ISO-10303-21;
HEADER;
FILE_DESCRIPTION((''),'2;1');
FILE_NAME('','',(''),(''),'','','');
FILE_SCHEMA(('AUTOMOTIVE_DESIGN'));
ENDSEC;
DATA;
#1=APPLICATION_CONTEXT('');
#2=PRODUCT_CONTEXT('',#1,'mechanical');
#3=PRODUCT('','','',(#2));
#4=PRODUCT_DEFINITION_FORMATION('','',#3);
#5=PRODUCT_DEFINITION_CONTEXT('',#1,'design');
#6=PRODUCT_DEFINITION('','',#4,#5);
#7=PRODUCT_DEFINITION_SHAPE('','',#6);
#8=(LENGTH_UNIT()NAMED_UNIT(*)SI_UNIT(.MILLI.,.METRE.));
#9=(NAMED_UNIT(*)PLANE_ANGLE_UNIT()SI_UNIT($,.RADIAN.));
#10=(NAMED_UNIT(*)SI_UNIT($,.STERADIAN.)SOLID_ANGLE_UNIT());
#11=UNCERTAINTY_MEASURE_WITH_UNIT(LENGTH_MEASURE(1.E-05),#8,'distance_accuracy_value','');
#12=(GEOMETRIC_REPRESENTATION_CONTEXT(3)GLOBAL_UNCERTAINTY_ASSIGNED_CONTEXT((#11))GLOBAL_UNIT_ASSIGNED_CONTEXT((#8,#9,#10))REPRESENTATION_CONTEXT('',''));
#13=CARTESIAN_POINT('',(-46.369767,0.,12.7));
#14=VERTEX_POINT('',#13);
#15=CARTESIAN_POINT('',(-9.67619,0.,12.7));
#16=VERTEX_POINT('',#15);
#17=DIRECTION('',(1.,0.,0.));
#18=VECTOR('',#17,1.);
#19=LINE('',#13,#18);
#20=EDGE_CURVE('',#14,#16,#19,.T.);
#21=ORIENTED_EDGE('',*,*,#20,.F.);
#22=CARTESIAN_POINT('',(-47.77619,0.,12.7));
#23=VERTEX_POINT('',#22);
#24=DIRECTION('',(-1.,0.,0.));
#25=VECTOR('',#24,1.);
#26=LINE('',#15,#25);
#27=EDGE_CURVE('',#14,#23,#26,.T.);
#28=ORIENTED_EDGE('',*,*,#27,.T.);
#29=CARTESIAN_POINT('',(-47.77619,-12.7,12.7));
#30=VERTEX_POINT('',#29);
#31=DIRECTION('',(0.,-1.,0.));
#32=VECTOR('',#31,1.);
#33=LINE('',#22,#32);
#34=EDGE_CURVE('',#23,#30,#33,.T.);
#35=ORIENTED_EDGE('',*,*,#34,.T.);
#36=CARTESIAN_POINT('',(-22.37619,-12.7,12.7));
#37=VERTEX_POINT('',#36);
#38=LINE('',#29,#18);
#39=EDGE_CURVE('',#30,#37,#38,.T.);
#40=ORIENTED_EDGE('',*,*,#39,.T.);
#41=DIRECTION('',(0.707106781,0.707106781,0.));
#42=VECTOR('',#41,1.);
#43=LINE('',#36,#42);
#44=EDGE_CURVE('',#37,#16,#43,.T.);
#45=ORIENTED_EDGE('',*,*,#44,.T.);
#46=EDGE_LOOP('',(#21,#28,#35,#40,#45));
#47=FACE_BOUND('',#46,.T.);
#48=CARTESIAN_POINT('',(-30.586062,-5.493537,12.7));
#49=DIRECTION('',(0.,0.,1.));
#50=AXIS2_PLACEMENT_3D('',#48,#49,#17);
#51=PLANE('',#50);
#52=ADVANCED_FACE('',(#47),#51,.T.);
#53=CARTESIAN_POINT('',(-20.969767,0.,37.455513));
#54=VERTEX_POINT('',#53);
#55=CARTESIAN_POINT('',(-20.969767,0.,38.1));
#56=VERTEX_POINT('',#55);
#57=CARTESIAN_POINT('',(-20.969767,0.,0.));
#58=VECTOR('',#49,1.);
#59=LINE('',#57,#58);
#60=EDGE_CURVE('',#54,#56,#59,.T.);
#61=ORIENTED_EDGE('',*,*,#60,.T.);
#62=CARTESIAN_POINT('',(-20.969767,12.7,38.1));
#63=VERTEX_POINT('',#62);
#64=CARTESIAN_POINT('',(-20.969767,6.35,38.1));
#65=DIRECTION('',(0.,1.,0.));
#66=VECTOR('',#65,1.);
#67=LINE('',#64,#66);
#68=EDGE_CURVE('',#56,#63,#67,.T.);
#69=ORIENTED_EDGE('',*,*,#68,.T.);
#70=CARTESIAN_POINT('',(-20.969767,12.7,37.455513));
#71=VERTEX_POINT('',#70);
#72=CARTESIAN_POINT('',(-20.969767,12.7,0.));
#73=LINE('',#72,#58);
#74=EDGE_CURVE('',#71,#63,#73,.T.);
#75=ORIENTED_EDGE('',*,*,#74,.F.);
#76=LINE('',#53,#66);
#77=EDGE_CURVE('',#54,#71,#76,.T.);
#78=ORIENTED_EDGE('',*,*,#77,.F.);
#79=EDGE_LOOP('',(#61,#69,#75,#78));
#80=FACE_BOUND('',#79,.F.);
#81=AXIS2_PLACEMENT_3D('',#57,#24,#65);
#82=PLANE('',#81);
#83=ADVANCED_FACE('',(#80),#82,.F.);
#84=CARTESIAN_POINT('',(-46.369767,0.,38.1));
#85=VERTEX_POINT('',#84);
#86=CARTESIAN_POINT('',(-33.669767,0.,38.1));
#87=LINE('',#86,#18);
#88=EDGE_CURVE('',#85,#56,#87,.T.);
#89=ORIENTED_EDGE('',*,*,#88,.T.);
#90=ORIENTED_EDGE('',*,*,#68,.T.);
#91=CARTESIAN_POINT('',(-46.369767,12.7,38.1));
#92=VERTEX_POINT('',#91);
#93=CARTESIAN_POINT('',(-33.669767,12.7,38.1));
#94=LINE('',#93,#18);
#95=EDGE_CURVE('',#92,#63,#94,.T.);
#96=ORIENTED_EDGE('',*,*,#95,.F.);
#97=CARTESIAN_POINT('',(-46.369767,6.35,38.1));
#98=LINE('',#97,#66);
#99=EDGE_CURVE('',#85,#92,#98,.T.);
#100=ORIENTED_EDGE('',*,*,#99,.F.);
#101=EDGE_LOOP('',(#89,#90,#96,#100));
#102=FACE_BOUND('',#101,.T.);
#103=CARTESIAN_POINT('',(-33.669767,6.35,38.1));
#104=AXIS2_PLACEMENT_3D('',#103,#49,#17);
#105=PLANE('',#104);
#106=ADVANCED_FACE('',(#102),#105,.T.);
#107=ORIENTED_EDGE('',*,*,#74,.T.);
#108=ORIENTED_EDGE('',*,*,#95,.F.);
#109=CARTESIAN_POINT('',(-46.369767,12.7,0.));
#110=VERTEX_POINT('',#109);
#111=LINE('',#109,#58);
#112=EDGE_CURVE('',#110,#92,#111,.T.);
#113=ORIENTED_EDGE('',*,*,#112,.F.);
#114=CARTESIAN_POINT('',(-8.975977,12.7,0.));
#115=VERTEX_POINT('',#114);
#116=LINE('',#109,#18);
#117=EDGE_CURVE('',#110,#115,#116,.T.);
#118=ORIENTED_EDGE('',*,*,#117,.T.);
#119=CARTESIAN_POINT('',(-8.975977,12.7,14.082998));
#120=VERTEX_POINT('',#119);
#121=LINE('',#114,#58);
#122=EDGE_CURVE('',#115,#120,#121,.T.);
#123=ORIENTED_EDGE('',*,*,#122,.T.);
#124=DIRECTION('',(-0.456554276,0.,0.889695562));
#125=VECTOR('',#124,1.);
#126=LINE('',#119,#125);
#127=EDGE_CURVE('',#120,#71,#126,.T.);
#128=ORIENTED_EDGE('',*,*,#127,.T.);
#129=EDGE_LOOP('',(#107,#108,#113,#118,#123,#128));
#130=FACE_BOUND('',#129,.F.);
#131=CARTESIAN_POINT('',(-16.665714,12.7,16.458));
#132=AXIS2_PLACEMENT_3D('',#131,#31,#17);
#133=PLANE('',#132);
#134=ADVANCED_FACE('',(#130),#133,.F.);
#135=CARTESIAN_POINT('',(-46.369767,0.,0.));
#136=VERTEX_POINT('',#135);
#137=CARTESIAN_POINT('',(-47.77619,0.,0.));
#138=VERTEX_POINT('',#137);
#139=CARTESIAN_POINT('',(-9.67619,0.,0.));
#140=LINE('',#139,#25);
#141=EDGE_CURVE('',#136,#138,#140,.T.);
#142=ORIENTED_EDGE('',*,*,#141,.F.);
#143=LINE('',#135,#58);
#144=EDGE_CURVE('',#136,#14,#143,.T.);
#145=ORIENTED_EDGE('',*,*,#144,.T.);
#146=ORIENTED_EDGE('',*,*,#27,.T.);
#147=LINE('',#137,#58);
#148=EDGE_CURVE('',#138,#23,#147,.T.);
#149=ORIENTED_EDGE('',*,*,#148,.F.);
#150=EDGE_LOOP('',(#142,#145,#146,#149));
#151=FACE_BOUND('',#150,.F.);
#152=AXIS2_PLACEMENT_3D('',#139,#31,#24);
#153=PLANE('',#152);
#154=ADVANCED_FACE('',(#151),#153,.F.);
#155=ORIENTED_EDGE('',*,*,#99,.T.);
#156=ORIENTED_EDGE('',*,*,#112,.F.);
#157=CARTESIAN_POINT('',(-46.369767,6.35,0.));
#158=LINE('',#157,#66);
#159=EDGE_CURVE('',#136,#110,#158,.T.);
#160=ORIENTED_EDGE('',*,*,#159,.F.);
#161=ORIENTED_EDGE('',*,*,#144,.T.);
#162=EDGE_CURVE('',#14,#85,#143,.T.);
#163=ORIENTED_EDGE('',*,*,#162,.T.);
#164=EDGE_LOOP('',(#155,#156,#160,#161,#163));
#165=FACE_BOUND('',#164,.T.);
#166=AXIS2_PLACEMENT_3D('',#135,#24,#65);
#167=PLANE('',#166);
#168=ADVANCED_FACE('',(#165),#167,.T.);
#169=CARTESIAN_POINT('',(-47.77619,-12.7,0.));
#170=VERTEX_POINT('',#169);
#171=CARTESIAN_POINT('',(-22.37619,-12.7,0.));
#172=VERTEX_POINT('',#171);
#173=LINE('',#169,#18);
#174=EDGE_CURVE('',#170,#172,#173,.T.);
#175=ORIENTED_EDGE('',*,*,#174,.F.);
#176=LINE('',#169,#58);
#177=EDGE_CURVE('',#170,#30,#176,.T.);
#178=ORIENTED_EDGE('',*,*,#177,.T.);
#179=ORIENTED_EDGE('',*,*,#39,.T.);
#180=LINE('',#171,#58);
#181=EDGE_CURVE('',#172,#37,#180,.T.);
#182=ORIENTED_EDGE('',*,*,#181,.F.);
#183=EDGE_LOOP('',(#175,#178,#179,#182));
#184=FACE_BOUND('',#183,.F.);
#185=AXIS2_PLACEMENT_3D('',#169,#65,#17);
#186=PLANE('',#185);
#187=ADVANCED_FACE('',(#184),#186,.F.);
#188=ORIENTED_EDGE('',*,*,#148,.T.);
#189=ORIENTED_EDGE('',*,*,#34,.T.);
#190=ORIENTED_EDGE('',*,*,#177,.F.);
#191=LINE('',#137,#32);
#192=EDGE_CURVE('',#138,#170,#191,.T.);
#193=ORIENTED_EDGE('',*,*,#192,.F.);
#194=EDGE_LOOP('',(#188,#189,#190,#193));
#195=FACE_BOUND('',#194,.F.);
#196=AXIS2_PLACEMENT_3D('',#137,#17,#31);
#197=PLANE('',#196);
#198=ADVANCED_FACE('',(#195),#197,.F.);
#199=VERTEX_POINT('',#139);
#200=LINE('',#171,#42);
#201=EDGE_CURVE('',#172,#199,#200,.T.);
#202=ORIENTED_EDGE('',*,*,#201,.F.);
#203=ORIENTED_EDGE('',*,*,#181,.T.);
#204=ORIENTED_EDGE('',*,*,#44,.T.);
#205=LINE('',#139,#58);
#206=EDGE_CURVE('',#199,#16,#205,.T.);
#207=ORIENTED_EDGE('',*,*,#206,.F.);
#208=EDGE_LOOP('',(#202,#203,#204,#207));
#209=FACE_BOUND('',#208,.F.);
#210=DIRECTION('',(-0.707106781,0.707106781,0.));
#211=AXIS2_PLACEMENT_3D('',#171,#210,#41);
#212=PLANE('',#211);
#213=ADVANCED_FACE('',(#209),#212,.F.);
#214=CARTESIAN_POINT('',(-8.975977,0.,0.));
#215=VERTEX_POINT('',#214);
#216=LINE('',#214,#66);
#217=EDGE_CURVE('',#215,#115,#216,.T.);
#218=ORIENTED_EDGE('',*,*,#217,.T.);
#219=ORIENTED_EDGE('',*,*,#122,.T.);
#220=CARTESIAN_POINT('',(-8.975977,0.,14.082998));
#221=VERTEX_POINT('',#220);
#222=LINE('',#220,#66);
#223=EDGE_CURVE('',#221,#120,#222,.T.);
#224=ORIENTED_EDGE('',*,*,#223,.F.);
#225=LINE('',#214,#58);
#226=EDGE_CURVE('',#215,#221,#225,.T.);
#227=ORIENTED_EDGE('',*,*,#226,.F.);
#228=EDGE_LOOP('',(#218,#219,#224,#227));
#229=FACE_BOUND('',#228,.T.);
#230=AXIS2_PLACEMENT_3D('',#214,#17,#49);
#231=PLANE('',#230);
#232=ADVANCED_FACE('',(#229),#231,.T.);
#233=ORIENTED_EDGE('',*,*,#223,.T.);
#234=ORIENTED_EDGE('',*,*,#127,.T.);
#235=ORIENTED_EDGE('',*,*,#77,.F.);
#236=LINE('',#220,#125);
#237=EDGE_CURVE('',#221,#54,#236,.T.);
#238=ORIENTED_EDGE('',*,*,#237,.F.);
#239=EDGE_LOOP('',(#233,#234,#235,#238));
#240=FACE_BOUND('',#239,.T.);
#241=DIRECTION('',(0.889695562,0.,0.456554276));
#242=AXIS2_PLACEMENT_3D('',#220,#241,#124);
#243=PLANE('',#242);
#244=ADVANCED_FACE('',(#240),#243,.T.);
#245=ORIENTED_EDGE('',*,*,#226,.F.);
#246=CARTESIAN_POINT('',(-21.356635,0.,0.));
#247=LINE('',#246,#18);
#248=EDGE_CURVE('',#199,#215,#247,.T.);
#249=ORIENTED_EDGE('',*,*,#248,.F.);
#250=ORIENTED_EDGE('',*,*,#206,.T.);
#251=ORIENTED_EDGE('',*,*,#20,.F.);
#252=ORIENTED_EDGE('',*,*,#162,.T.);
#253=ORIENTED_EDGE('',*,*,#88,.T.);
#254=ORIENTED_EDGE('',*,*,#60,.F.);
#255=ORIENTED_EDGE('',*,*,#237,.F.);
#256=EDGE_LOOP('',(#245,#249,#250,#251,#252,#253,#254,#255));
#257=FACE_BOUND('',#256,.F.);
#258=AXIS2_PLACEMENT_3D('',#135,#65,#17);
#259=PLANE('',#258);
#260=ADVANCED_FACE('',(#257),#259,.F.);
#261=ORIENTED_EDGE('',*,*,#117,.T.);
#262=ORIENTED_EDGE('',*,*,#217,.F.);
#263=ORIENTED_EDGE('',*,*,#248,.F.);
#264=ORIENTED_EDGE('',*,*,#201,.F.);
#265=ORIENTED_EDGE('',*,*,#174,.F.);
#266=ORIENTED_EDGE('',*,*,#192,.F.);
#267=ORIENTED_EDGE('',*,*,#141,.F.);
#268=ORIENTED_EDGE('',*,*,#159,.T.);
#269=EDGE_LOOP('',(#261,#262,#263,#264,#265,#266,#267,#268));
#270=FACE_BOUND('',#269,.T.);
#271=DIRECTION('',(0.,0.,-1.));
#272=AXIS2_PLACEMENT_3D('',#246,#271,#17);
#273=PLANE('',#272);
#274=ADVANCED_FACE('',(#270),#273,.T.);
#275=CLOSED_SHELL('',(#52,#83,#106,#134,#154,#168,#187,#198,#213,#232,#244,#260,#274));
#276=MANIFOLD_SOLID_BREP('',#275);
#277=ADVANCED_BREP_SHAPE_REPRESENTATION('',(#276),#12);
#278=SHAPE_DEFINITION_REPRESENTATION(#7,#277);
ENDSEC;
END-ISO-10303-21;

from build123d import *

# Parameters (mm, degrees)
F1_DEPTH = 12.7
F2_W     = 25.4
F2_H     = 12.7
F3_DEPTH = 38.1
F5_DEPTH = 12.7


# Not quite as in the source:
# - a feature names something its author has since deleted; it is built from what else it names


with BuildPart() as f1:
    # F0 (on Top) → F1 (new body)
    with BuildSketch(Plane.XY):
        Polygon((-9.6761901296, 0), (-47.7761901296, 0), (-47.7761901296, -12.7), (-22.3761901296, -12.7), align=None)
    extrude(amount=F1_DEPTH)

    # F2 (on Top) → F3 (join)
    with BuildSketch(Plane.XY):
        with Locations((-33.6697670078, 6.35)):
            Rectangle(F2_W, F2_H)
    extrude(amount=F3_DEPTH)

    # F4 (on Front) → F5 (join)
    with BuildSketch(Plane.XZ):
        Polygon((-21.0471171886, 37.6062467694), (-21.3566347957, 0), (-8.9759770781, 0), (-8.9759770781, 14.0829980373), align=None)
    extrude(amount=-F5_DEPTH)


solid = f1.part
